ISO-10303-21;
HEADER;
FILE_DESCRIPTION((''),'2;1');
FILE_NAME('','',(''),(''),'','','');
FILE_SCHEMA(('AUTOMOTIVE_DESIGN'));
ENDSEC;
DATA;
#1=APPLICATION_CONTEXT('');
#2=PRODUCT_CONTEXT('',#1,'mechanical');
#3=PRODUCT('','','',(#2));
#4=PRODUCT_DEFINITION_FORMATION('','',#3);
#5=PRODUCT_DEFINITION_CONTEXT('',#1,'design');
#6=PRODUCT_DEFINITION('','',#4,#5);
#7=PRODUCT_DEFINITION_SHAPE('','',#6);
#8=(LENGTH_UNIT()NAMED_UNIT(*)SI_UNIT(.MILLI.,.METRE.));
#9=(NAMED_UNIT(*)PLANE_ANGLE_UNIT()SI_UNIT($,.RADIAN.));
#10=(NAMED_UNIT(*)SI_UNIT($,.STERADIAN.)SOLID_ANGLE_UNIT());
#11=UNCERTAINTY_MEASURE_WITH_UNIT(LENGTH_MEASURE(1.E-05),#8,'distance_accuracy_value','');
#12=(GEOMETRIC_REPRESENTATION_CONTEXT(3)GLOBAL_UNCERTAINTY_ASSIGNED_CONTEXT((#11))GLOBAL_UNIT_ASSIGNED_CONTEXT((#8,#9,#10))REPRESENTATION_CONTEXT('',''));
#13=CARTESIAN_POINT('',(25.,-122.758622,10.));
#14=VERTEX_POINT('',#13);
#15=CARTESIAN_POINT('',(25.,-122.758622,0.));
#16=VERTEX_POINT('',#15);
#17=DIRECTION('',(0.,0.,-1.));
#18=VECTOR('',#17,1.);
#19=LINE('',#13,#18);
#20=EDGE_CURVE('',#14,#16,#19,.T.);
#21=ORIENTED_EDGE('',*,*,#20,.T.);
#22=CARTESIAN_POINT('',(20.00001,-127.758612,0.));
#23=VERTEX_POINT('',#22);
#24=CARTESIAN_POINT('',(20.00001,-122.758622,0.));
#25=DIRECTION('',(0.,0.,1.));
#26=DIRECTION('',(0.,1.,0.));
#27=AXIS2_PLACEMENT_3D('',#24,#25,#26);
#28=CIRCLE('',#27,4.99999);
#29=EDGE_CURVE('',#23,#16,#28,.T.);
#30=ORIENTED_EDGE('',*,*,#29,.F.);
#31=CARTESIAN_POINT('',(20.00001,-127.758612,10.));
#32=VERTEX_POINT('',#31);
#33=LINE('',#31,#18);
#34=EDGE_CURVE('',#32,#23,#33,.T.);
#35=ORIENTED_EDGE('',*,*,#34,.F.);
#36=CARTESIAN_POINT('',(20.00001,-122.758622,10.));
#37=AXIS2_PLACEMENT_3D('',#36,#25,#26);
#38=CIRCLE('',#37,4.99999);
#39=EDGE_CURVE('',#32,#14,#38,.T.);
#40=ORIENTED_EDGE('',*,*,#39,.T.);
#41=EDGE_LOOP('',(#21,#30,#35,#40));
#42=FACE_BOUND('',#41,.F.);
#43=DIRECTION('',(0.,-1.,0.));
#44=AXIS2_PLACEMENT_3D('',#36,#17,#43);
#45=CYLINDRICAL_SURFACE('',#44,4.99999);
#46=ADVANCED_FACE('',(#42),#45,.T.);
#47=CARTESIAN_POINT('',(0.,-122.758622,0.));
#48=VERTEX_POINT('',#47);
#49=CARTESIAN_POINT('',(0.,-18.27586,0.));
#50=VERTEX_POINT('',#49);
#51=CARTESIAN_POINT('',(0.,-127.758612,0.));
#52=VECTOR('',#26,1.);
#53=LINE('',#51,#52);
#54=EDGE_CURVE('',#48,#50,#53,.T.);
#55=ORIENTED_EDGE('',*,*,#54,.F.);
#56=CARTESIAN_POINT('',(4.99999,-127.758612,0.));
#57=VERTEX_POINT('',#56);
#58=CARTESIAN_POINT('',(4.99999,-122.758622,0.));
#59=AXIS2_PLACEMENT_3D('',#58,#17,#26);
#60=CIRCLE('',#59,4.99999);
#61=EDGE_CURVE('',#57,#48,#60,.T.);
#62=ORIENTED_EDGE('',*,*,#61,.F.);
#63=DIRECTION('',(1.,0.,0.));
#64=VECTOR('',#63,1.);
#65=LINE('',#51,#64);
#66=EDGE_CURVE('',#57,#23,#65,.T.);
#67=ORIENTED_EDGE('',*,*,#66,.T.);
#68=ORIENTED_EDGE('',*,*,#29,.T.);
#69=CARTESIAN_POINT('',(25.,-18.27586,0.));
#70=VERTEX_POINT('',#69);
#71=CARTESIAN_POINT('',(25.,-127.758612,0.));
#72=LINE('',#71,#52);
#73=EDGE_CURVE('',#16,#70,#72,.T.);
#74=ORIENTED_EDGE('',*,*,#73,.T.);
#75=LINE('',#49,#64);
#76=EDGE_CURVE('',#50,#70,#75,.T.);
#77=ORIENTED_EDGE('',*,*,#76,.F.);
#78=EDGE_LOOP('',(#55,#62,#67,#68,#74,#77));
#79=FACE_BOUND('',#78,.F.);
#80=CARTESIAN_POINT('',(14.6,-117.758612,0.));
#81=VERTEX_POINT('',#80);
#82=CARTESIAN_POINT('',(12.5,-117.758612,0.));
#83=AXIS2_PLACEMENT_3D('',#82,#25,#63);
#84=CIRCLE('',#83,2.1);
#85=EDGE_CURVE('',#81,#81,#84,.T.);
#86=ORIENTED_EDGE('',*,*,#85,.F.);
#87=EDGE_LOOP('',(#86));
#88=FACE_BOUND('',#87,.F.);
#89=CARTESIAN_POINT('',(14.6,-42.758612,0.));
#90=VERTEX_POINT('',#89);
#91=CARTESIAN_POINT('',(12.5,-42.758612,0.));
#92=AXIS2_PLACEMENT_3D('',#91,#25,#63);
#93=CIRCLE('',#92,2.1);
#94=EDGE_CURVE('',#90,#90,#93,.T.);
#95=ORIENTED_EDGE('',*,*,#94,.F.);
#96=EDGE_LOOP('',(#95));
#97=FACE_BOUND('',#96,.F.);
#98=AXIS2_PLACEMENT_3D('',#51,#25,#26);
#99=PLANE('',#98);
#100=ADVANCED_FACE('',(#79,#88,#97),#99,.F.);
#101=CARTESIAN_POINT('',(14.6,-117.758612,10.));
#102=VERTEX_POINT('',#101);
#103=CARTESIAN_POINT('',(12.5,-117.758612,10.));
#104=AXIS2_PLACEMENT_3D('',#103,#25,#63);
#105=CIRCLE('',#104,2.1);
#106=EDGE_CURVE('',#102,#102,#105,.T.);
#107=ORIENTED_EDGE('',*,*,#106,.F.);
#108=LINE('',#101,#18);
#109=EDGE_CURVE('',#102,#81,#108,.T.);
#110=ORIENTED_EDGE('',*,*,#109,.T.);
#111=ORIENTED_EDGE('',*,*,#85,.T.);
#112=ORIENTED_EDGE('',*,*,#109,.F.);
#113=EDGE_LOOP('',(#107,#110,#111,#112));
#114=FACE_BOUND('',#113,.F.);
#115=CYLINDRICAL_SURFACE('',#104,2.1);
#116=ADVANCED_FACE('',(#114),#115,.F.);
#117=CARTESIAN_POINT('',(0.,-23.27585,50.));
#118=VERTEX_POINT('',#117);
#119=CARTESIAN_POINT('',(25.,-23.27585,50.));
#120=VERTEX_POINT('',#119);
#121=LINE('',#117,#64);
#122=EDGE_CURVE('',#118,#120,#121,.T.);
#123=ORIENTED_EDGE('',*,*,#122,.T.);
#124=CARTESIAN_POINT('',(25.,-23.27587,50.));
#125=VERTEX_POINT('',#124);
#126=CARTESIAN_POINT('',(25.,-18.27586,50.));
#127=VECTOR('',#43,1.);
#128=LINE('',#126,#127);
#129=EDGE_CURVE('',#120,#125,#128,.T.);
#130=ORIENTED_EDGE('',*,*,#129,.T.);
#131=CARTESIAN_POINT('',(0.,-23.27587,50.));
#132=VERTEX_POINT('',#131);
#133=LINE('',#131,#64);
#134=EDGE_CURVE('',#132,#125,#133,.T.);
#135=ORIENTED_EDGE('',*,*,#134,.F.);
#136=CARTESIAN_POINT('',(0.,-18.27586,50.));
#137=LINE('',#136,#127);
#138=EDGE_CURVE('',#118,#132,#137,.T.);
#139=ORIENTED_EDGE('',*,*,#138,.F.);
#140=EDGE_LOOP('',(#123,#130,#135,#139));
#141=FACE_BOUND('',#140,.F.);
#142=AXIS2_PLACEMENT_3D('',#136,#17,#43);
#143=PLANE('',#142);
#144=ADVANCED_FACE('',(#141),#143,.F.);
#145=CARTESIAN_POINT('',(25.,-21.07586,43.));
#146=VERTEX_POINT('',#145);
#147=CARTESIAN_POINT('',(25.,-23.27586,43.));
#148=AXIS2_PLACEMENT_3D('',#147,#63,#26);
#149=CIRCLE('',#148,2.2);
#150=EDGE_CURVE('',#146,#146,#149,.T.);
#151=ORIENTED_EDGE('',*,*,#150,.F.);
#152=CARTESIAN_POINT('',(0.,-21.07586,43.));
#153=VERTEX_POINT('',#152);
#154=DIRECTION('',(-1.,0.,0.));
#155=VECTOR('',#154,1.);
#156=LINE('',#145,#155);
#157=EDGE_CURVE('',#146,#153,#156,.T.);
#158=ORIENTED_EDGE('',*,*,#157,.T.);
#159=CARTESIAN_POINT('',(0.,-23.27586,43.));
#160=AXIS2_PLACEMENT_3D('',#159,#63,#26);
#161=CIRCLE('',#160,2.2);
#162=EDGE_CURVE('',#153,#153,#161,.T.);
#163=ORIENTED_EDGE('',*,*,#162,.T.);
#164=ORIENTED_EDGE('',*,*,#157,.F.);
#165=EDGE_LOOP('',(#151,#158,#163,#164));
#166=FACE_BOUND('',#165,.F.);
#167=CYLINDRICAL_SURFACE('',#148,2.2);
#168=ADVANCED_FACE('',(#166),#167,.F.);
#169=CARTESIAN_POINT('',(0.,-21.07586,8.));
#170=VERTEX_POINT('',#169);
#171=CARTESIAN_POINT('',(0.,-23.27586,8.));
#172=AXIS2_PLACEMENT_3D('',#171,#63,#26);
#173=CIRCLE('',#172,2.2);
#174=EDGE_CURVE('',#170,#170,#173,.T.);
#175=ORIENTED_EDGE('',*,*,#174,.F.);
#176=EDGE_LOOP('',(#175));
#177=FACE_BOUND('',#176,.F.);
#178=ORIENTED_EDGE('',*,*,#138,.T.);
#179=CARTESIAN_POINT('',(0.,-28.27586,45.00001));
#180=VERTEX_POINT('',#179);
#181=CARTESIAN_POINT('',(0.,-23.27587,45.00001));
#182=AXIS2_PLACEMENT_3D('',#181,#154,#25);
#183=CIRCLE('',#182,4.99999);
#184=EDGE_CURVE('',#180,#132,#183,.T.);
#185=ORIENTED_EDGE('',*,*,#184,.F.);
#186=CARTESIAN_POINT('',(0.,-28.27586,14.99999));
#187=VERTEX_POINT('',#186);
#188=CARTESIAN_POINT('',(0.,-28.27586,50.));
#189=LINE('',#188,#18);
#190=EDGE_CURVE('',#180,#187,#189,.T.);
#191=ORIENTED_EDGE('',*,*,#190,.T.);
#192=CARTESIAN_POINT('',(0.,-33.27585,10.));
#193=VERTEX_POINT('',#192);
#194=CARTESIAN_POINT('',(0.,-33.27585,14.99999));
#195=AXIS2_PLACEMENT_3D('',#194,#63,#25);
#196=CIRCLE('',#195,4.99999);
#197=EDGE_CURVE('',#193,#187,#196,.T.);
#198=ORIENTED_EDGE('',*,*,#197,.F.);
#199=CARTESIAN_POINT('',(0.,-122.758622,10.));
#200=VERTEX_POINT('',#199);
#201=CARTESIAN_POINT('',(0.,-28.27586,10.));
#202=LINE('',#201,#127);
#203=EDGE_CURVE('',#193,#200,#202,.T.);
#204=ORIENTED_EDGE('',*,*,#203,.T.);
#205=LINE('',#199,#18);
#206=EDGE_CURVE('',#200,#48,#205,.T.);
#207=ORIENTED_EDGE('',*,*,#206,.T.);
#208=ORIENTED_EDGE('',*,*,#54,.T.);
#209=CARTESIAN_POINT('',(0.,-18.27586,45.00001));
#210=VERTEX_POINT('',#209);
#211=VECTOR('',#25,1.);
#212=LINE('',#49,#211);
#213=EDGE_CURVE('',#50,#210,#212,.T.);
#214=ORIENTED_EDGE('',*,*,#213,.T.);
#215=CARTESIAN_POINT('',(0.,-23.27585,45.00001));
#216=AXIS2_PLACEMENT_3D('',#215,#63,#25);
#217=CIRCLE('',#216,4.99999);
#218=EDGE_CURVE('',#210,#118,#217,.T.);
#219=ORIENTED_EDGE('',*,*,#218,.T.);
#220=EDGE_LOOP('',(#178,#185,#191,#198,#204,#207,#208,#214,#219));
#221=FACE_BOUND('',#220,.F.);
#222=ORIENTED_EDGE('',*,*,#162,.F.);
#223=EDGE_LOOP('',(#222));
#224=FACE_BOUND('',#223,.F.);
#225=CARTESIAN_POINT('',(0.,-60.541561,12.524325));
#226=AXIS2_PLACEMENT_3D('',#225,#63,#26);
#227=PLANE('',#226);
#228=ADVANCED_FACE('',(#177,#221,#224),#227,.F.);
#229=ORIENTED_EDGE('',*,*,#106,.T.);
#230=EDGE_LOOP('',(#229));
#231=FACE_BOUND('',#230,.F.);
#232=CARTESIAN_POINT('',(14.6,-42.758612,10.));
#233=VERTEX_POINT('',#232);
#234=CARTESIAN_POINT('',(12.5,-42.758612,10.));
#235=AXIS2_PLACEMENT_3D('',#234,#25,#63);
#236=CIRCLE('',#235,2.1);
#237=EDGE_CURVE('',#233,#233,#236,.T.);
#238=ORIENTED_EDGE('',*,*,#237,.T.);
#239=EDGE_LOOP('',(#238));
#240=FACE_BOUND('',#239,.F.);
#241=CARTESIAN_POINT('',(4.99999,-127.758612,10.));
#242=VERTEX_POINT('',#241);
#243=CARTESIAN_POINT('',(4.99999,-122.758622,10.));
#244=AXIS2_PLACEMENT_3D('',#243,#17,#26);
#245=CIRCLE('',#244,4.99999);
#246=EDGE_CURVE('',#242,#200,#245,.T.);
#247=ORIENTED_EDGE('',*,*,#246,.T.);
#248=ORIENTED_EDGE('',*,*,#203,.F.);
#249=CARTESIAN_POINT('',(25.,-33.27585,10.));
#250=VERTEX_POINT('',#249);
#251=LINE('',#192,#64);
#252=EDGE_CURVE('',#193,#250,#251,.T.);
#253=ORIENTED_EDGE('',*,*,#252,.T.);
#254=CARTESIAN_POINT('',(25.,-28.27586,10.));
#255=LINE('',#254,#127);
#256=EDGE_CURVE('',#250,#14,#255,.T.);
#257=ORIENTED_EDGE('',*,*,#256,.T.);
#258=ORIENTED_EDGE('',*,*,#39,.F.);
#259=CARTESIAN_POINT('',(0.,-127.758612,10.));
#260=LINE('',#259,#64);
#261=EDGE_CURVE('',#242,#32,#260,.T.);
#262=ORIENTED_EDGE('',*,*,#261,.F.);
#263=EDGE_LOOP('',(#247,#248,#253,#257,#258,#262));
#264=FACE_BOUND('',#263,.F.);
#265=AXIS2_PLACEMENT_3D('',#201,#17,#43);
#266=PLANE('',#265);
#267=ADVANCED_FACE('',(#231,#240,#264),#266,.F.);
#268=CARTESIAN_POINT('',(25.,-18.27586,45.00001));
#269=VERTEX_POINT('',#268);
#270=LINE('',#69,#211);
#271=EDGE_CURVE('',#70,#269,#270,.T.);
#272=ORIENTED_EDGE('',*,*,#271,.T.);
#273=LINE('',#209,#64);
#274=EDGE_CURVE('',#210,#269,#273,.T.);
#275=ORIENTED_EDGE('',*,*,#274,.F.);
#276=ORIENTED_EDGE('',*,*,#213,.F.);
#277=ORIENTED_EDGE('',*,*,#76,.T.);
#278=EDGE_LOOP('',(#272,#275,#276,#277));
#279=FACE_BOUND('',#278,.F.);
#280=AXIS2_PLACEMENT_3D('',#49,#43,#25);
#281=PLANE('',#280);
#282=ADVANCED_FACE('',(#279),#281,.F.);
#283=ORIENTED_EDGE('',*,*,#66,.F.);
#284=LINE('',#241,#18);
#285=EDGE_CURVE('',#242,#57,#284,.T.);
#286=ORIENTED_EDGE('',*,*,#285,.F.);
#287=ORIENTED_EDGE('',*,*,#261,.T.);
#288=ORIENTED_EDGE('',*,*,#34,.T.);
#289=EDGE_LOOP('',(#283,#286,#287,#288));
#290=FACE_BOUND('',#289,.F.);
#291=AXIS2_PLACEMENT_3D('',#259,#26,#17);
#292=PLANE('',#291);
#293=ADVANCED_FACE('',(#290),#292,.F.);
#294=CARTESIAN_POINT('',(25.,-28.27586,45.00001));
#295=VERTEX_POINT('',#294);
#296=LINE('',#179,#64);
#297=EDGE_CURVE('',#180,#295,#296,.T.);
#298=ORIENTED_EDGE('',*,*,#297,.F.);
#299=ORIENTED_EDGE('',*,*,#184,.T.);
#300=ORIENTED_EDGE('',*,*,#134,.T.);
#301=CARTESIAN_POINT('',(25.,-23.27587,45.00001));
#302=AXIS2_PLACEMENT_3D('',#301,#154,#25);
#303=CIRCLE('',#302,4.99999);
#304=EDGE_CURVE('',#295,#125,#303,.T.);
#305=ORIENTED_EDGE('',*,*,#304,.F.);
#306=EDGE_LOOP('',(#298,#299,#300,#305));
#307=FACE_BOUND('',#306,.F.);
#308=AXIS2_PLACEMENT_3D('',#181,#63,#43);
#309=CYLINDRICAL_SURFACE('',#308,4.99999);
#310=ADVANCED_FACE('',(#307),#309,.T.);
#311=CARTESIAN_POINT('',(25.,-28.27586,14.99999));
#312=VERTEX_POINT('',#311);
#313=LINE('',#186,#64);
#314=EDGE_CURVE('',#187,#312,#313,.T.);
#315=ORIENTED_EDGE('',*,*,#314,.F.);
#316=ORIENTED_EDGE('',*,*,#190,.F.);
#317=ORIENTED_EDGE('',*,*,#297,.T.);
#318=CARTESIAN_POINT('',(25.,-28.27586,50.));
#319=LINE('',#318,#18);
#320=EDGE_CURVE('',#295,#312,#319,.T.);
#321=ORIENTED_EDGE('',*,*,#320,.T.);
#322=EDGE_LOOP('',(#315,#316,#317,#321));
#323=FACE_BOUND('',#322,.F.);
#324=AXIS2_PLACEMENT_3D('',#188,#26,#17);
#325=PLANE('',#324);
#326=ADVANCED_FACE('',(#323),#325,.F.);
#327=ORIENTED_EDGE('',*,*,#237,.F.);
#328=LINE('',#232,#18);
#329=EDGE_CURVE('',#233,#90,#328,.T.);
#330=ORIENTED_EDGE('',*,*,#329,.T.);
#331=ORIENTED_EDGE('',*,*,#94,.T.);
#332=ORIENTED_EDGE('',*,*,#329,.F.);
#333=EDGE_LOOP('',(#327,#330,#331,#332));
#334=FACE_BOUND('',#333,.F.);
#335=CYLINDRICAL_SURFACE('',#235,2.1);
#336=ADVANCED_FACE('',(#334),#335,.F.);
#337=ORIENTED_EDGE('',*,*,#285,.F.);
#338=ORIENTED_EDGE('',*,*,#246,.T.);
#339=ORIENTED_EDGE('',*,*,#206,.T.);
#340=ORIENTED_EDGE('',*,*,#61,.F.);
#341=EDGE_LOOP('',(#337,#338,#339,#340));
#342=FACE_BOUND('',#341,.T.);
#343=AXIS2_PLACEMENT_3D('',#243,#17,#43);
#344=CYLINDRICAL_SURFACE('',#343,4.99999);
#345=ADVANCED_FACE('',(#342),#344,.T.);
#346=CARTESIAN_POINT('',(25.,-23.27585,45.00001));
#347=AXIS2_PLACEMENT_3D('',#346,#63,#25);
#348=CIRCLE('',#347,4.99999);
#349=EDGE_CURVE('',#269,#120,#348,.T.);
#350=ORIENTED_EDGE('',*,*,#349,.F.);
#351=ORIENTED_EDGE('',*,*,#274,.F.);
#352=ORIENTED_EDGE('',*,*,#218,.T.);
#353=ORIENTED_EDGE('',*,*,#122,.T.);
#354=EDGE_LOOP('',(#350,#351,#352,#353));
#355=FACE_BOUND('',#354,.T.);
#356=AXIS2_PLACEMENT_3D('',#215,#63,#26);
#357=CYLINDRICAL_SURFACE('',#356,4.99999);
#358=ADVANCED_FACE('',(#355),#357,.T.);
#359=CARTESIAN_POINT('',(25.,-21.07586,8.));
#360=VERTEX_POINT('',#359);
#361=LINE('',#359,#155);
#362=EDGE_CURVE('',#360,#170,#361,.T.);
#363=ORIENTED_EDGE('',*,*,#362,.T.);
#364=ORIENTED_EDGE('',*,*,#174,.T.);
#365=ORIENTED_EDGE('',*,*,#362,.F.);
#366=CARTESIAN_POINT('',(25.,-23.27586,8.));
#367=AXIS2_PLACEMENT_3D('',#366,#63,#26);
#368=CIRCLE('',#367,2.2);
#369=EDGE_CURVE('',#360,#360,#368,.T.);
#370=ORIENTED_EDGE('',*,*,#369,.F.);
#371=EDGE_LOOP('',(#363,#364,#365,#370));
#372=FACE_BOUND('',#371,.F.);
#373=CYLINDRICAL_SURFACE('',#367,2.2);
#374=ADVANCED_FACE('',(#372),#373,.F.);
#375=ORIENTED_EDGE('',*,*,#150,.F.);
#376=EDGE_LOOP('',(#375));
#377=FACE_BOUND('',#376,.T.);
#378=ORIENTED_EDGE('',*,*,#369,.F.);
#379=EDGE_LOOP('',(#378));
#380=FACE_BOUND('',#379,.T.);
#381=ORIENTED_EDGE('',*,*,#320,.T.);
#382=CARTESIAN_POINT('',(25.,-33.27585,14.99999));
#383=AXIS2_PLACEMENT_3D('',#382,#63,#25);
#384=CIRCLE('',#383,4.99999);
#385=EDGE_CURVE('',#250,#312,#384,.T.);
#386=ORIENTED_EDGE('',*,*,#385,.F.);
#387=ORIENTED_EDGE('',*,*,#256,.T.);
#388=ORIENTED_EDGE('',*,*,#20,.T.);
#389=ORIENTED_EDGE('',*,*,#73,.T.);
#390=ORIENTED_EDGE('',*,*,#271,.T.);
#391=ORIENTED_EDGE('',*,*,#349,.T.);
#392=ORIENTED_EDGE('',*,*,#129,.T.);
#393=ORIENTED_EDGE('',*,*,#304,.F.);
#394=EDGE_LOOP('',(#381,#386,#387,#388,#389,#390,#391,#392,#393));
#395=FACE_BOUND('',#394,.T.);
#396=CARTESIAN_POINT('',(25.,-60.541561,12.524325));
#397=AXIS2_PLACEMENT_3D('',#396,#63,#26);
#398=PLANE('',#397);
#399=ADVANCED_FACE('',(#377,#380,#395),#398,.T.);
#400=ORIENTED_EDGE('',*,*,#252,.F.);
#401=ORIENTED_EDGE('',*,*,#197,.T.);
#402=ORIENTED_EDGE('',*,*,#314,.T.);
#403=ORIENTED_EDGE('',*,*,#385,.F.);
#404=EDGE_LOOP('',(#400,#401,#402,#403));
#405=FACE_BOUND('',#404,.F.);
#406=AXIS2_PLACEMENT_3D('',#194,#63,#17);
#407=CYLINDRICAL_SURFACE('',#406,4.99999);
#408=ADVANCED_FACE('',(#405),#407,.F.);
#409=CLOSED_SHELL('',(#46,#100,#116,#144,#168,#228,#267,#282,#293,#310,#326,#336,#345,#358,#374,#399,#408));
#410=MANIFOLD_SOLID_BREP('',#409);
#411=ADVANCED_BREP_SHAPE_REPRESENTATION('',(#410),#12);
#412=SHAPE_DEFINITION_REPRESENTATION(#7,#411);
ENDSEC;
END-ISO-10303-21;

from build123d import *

# Parameters (mm, degrees)
F1_DEPTH = 25
F3_R     = 2.1
F4_DEPTH = 25
F6_R     = 2.2
F7_DEPTH = 25
F8_R     = 4.99999


# Not quite as in the source:
# - a fillet or chamfer is up to 0.001 mm smaller than in the source, because OpenCascade refuses the exact size


with BuildPart() as f1:
    # F0 (on Right) → F1 (new body)
    with BuildSketch(Plane.YZ):
        Polygon((-127.7586124506, 10), (-127.7586124506, 0), (-18.2758603601, 0), (-18.2758603601, 50), (-28.2758603601, 50), (-28.2758603601, 10), align=None)
    extrude(amount=F1_DEPTH)

    # F3 (on face) → F4 (cut)
    with BuildSketch(Plane.XY.offset(10)):
        with Locations((12.5, -117.7586124506)):
            Circle(F3_R)
        with Locations((12.5, -42.7586124506)):
            Circle(F3_R)
    extrude(amount=-F4_DEPTH, mode=Mode.SUBTRACT)

    # F6 (on face) → F7 (cut)
    with BuildSketch(Plane.YZ.offset(25)):
        with Locations((-23.2758603601, 43)):
            Circle(F6_R)
        with Locations((-23.2758603601, 8)):
            Circle(F6_R)
    extrude(amount=-F7_DEPTH, mode=Mode.SUBTRACT)

    # F8 (radius 5 in the source; OpenCascade refuses exactly that, so slightly less here)
    f8_edges = [f1.edges().sort_by_distance(p)[0] for p in [
        (12.5, -28.27586, 10),
        (12.5, -18.27586, 50),
        (12.5, -28.27586, 50),
        (25, -127.758612, 5),
        (0, -127.758612, 5),
    ]]
    fillet(f8_edges, radius=F8_R)


solid = f1.part
